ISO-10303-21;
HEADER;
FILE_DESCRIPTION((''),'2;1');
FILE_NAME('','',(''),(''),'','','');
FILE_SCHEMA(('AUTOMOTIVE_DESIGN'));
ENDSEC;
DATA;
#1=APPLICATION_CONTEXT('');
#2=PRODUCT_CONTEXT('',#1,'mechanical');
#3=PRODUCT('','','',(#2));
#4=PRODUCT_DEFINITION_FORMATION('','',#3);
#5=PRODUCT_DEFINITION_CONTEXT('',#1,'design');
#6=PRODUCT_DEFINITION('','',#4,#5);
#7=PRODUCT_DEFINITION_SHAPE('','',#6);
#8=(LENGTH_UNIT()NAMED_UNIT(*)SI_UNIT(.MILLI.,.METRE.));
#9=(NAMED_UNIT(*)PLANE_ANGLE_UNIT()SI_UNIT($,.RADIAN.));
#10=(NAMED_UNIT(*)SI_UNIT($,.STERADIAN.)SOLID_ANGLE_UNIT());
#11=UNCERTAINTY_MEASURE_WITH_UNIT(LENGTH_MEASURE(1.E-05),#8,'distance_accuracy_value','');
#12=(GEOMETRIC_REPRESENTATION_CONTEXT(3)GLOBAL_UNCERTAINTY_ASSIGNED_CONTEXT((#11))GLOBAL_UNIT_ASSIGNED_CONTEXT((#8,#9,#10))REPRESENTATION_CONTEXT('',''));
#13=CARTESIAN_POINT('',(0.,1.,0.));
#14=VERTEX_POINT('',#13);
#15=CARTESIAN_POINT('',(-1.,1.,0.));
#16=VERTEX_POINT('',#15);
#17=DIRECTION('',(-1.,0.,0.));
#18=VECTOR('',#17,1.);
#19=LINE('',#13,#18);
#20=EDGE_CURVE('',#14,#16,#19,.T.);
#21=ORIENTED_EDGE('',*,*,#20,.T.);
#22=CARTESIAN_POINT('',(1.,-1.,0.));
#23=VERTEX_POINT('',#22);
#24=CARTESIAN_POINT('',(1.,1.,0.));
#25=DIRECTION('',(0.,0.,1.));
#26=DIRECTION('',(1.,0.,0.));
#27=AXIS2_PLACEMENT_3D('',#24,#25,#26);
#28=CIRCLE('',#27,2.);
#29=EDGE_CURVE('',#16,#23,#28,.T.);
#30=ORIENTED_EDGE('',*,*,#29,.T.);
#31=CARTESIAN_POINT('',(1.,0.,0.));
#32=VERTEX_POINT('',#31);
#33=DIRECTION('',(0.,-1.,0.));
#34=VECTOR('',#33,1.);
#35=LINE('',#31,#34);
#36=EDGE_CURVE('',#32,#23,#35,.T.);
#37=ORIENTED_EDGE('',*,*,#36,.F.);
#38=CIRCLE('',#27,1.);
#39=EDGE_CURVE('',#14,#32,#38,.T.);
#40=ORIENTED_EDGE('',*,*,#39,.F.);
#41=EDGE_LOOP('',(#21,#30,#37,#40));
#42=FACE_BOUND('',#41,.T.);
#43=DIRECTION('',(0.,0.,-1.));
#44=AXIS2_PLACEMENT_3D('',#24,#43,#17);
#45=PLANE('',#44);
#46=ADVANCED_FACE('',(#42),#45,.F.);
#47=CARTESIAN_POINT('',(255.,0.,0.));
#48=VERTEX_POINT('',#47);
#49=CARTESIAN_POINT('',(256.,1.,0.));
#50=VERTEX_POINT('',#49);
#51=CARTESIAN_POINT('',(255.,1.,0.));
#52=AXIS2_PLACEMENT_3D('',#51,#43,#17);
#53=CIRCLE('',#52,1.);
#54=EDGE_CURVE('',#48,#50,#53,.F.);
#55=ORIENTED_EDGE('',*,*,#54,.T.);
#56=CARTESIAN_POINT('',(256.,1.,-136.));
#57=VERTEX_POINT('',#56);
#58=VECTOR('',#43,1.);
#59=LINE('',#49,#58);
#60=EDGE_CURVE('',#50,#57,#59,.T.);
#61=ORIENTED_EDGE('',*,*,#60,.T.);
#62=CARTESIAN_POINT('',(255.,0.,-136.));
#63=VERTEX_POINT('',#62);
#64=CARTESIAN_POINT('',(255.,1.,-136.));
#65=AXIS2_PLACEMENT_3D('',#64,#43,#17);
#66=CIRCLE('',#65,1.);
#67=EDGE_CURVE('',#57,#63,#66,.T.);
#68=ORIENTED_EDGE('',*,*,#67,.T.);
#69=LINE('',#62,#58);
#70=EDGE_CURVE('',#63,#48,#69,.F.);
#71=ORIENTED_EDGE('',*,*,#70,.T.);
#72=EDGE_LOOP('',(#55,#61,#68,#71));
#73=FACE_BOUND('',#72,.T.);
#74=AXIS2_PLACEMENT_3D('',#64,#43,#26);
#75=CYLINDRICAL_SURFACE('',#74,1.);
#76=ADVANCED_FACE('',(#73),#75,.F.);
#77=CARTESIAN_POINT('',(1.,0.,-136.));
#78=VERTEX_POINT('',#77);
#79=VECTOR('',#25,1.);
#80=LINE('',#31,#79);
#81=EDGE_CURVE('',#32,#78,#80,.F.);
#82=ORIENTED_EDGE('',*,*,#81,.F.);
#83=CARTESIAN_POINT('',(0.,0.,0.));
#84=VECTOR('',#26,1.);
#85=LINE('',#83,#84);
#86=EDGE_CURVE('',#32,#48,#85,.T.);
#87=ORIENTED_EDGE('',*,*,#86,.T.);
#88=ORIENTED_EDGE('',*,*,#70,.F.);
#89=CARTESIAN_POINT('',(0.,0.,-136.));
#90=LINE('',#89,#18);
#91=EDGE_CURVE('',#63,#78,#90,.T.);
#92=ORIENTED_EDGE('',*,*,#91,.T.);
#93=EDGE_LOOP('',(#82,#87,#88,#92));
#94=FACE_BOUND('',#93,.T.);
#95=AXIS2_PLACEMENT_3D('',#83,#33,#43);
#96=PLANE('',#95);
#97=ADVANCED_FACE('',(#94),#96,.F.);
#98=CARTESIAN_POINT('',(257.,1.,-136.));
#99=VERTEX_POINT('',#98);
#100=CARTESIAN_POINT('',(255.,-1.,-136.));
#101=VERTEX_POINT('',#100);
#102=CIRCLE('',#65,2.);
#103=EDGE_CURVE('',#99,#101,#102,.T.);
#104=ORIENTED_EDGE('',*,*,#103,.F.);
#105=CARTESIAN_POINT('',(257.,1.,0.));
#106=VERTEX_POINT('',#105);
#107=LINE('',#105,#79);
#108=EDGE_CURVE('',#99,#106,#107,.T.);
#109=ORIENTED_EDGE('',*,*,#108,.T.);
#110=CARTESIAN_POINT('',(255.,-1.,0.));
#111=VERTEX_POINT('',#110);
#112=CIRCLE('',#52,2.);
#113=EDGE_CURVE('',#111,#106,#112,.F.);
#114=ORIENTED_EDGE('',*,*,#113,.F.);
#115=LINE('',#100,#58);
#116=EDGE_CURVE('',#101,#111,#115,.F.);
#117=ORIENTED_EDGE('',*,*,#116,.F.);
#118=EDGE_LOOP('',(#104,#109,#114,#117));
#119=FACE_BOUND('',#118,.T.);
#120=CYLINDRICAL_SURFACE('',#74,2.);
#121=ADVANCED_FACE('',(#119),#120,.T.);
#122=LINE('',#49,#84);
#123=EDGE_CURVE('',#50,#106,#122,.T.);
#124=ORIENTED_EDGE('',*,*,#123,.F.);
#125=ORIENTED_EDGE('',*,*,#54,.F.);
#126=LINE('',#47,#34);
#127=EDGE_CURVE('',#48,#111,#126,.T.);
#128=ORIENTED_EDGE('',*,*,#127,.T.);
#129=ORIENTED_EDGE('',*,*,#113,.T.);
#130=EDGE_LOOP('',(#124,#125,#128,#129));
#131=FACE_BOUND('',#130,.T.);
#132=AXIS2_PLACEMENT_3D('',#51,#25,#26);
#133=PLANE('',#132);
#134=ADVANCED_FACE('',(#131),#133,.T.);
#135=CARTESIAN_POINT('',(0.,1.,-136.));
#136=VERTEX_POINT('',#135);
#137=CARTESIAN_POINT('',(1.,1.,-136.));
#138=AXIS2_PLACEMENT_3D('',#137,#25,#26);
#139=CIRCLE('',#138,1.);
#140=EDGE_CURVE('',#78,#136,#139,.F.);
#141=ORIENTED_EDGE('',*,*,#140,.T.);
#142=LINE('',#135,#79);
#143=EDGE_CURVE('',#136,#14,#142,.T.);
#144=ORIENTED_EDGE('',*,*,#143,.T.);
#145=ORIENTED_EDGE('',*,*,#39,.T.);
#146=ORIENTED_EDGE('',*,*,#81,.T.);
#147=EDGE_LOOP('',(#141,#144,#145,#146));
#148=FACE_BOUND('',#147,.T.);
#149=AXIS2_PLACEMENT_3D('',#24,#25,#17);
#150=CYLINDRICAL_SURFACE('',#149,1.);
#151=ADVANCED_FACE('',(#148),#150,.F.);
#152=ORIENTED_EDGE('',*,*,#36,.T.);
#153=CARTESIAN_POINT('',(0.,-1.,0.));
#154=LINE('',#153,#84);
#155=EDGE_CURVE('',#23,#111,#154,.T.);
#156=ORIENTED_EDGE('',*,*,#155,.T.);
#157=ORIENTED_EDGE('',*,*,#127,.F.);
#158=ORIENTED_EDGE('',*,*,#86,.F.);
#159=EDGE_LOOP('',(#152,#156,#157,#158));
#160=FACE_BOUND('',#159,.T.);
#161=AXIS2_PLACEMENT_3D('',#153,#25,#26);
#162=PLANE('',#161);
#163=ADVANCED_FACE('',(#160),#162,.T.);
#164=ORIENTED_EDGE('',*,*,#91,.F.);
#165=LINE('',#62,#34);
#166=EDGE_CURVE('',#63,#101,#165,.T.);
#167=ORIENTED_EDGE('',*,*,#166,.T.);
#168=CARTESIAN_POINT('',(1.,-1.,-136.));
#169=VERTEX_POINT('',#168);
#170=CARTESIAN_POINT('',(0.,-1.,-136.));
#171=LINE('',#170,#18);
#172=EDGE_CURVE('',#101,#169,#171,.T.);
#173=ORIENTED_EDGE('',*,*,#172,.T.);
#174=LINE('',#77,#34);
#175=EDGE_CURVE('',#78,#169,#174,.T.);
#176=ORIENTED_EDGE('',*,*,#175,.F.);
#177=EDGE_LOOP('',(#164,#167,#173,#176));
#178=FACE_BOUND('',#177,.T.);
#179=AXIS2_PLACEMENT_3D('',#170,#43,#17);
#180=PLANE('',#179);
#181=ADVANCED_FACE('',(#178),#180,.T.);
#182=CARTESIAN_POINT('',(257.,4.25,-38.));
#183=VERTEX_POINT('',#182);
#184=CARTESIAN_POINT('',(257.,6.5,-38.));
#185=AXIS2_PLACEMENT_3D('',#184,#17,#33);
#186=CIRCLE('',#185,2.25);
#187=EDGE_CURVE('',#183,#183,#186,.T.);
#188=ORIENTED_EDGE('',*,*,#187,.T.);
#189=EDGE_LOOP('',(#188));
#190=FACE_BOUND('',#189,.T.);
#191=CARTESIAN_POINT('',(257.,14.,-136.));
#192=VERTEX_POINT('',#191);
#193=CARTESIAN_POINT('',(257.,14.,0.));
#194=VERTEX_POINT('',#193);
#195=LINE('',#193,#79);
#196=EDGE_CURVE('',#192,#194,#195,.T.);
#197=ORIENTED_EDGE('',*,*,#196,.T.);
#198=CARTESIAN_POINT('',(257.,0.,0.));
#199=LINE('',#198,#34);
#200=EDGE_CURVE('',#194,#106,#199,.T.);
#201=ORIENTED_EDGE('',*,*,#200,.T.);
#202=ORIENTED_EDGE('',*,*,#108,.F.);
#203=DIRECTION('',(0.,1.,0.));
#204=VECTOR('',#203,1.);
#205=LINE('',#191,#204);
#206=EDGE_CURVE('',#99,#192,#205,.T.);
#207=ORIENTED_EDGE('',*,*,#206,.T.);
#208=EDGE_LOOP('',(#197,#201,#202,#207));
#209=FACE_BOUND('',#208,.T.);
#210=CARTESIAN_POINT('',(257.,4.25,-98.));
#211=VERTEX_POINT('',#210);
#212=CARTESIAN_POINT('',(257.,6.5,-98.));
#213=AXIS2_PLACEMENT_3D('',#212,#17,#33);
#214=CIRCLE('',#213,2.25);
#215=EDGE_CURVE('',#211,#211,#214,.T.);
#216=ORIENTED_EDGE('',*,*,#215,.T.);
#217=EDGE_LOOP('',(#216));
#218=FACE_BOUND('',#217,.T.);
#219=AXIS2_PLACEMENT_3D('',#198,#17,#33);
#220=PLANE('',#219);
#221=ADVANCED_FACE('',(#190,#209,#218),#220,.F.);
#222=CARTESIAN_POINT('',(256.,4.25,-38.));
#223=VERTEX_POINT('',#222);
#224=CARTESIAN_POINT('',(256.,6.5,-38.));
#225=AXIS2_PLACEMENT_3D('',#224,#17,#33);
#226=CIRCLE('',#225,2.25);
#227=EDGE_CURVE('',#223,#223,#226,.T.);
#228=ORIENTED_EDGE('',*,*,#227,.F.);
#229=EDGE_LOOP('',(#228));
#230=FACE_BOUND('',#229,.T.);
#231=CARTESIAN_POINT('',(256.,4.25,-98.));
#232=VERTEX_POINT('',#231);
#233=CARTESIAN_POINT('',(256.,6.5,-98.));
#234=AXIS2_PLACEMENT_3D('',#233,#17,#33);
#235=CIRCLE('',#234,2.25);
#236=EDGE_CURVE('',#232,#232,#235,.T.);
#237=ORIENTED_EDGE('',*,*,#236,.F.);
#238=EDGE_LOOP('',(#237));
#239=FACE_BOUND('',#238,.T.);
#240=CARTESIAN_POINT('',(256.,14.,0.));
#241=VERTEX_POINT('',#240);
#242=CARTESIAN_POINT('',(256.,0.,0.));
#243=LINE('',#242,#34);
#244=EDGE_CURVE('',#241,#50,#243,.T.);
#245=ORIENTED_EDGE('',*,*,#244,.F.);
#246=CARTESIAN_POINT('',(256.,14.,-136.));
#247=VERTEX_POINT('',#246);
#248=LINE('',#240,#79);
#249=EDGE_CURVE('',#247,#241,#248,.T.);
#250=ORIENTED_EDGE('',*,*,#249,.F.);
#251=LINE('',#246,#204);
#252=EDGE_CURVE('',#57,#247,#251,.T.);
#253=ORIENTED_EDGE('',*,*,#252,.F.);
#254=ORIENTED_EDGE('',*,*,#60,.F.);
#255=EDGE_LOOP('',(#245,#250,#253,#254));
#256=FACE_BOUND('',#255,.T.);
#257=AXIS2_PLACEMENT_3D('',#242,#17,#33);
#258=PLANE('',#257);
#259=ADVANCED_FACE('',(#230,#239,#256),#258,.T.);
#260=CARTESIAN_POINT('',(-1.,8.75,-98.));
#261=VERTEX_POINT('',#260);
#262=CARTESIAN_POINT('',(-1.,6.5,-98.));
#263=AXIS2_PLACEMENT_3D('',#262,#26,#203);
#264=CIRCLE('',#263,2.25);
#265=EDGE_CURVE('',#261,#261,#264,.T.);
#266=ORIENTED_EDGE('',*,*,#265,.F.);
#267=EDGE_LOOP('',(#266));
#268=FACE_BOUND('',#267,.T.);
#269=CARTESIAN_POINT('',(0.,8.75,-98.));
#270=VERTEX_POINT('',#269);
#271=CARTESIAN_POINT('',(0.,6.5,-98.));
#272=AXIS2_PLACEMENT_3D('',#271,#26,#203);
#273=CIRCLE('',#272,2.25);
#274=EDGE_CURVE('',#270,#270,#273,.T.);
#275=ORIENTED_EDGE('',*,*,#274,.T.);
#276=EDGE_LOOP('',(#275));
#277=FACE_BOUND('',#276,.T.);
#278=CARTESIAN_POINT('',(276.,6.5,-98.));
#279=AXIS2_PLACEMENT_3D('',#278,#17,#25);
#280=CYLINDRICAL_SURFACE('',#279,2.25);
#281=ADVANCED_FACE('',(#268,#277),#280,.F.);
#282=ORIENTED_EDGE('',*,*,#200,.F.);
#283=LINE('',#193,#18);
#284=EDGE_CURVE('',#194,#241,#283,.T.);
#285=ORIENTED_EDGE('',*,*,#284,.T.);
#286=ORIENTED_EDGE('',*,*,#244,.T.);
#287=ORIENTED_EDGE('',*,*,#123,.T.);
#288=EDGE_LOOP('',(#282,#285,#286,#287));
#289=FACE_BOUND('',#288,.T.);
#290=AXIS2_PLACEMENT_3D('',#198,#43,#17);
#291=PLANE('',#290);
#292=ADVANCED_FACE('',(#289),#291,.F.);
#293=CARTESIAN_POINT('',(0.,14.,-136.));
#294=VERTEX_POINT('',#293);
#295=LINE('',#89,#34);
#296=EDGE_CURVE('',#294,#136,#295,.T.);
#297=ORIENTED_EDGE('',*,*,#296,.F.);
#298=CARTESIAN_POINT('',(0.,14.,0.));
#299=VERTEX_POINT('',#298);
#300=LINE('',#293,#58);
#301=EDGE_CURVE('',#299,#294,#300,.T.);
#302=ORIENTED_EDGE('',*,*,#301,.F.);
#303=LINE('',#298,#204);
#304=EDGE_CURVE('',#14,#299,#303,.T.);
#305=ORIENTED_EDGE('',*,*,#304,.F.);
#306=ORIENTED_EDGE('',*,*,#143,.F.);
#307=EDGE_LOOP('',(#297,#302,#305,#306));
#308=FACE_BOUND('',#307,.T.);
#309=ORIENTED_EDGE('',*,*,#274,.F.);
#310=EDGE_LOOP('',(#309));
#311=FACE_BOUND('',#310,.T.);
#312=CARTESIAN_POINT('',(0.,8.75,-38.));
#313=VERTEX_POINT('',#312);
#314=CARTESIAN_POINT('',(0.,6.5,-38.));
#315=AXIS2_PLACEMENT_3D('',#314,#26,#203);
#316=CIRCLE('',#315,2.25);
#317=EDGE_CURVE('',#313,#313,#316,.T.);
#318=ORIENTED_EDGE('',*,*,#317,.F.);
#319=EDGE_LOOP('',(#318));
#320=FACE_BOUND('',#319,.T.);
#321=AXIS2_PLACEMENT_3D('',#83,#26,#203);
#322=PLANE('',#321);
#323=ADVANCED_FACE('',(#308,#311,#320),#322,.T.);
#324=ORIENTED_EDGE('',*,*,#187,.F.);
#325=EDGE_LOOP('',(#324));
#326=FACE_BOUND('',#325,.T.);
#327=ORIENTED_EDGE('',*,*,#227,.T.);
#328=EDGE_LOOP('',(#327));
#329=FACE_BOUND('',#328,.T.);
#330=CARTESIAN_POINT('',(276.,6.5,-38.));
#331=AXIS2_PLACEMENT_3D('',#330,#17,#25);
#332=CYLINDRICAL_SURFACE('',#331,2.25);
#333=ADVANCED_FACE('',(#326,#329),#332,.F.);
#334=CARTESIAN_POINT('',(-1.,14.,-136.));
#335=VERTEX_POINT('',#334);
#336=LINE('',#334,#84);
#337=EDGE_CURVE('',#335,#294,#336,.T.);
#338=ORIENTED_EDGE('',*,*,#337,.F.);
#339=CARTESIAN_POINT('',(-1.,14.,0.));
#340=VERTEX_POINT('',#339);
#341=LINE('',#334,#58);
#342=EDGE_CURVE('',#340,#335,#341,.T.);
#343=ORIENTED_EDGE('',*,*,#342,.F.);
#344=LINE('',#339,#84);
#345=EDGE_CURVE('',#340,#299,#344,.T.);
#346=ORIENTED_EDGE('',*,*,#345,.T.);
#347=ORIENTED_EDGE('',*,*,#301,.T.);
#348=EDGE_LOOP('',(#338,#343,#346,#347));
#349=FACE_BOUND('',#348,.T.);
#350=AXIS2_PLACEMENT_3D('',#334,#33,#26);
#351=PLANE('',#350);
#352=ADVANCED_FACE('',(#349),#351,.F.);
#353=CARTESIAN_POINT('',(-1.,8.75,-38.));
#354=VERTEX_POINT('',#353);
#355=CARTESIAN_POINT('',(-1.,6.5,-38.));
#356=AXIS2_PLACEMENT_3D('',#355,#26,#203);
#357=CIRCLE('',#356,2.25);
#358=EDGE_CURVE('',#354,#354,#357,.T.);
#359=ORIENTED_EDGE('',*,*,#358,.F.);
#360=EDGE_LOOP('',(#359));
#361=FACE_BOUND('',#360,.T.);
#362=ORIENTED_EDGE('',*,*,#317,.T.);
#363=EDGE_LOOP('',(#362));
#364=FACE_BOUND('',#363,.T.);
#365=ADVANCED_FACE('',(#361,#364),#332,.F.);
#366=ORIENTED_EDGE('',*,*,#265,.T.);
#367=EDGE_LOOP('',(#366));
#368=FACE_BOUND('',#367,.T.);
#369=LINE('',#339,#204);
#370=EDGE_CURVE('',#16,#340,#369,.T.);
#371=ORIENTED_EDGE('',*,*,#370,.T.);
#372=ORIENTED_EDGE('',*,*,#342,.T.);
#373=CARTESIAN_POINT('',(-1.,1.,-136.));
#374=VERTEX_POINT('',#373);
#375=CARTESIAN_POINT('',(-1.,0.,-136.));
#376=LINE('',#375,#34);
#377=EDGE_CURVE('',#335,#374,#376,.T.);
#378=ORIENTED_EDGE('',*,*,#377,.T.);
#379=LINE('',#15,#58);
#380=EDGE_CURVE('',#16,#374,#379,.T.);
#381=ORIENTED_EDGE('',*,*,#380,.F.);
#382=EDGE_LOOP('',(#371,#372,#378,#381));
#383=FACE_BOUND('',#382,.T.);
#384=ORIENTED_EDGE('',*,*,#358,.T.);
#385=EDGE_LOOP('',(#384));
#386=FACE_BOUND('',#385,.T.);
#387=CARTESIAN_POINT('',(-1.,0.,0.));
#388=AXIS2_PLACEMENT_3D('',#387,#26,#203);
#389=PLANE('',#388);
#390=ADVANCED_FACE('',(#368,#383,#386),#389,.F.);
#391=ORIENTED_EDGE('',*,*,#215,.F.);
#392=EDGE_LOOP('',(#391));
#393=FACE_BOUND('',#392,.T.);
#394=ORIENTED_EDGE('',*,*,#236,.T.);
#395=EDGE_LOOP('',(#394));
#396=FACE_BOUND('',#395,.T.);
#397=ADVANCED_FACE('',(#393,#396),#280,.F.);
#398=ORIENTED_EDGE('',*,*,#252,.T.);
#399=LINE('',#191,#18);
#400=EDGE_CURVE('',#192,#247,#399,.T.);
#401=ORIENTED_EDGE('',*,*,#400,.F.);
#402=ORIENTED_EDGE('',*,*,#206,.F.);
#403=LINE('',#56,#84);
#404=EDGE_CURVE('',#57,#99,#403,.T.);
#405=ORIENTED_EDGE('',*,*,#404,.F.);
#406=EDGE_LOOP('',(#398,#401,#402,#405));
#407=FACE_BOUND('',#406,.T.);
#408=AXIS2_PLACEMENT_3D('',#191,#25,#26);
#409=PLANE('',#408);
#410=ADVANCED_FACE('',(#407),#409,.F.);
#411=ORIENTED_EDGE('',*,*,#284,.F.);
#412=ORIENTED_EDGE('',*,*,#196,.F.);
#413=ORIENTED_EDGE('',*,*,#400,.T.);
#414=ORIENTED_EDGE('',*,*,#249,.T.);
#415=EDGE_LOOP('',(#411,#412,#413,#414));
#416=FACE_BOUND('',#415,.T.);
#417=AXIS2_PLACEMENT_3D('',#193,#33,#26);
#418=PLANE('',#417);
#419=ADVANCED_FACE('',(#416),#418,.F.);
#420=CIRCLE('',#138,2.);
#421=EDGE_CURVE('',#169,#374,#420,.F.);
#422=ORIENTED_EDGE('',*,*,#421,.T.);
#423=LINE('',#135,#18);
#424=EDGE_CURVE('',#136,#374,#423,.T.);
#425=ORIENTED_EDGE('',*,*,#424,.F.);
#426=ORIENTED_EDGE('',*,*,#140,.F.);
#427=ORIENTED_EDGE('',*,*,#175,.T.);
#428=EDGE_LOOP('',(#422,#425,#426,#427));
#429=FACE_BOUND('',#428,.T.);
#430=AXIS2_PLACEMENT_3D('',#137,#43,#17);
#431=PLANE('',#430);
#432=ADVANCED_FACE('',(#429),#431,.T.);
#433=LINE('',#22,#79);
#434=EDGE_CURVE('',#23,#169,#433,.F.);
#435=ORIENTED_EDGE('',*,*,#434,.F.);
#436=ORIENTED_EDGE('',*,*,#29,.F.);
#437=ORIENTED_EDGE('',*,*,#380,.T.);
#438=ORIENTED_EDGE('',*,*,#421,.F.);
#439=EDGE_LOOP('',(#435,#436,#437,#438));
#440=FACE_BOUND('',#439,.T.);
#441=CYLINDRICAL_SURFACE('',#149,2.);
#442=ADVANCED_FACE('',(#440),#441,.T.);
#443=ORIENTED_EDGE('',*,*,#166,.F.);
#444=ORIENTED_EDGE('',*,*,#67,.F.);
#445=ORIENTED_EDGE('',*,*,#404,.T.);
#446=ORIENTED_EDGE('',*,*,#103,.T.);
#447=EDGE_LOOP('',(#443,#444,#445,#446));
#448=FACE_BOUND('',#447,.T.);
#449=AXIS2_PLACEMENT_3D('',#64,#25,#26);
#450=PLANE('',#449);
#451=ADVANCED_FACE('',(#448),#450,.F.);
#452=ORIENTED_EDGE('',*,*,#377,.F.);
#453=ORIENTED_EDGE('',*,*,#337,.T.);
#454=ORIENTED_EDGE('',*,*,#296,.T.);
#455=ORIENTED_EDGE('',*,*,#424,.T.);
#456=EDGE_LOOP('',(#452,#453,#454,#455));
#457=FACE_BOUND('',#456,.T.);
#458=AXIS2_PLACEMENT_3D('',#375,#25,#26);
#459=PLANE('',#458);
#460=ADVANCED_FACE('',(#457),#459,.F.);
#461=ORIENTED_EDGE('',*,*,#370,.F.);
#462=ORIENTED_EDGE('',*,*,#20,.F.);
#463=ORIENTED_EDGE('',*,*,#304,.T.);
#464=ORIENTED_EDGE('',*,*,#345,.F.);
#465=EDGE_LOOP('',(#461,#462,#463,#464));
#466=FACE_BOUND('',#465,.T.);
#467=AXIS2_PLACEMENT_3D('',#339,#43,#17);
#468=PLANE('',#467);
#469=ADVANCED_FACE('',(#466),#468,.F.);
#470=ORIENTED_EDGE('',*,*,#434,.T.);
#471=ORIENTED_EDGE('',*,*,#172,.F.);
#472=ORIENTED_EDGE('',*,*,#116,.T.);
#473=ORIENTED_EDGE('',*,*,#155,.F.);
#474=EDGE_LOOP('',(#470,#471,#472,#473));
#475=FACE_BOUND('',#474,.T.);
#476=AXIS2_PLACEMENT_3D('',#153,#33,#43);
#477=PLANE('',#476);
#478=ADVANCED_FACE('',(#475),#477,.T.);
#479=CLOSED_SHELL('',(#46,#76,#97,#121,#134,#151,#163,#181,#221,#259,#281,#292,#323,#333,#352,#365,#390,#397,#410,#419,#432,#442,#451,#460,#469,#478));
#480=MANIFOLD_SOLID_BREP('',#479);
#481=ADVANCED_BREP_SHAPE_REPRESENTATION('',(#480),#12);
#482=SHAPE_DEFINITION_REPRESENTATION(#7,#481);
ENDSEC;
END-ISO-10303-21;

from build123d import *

# Parameters (mm, degrees)
SKETCH1_W                    = 256
SKETCH1_H                    = 136
BASE_FLANGE1_DEPTH           = 1
EDGE_FLANGE1_STRIP_W         = 6
EDGE_FLANGE1_STRIP_H         = 1
EDGE_FLANGE1_STRIP_CUT_DEPTH = 136
EDGE_FLANGE1_DEPTH           = 136
EDGE_FLANGE2_STRIP_W         = 6
EDGE_FLANGE2_STRIP_H         = 1
EDGE_FLANGE2_STRIP_CUT_DEPTH = 136
EDGE_FLANGE2_DEPTH           = 136
SKETCH12_R                   = 2.25
CUT_EXTRUDE1_DEPTH           = 278


# Sheet-metal steps are written as plain solids
with BuildPart() as part:
    # Sketch1 → Base-Flange1 (new body)
    with BuildSketch(Plane(origin=(0, 0, 0), x_dir=(1, 0, 0), z_dir=(0, 1, 0))):
        with Locations((128, 68)):
            Rectangle(SKETCH1_W, SKETCH1_H)
    extrude(amount=-BASE_FLANGE1_DEPTH)

    # Edge-Flange1 strip (across the edge) → Edge-Flange1 strip cut (cut)
    with BuildSketch(Plane.XY.offset(-136)):
        with Locations((-2, -0.5)):
            Rectangle(EDGE_FLANGE1_STRIP_W, EDGE_FLANGE1_STRIP_H)
    extrude(amount=EDGE_FLANGE1_STRIP_CUT_DEPTH, mode=Mode.SUBTRACT)

    # Edge-Flange1 section (across the edge) → Edge-Flange1 (add)
    with BuildSketch(Plane.XY.offset(-136)):
        with BuildLine():
            Line((-1, 1), (-1, 14))
            Line((-1, 14), (0, 14))
            Line((0, 14), (0, 1))
            ThreePointArc((0, 1), (0.292893219, 0.292893219), (1, 0))
            Line((1, 0), (1, -1))
            ThreePointArc((1, -1), (-0.414213562, -0.414213562), (-1, 1))
        make_face()
    extrude(amount=EDGE_FLANGE1_DEPTH)

    # Edge-Flange2 strip (across the edge) → Edge-Flange2 strip cut (cut)
    with BuildSketch(Plane(origin=(256, 0, 0), x_dir=(-1, 0, 0), z_dir=(0, 0, -1))):
        with Locations((-2, -0.5)):
            Rectangle(EDGE_FLANGE2_STRIP_W, EDGE_FLANGE2_STRIP_H)
    extrude(amount=EDGE_FLANGE2_STRIP_CUT_DEPTH, mode=Mode.SUBTRACT)

    # Edge-Flange2 section (across the edge) → Edge-Flange2 (add)
    with BuildSketch(Plane(origin=(256, 0, 0), x_dir=(-1, 0, 0), z_dir=(0, 0, -1))):
        with BuildLine():
            Line((-1, 1), (-1, 14))
            Line((-1, 14), (0, 14))
            Line((0, 14), (0, 1))
            ThreePointArc((0, 1), (0.292893219, 0.292893219), (1, 0))
            Line((1, 0), (1, -1))
            ThreePointArc((1, -1), (-0.414213562, -0.414213562), (-1, 1))
        make_face()
    extrude(amount=EDGE_FLANGE2_DEPTH)

    # Sketch12 → Cut-Extrude1 (cut)
    with BuildSketch(Plane(origin=(-2, -333.400026456, -193.062536038), x_dir=(0, 1, 0), z_dir=(-1, 0, 0))):
        with Locations(Location((339.900026456, -95.062536038, 0), (0, 0, 180))):
            Circle(SKETCH12_R)
        with Locations(Location((339.900026456, -155.062536038, 0), (0, 0, 180))):
            Circle(SKETCH12_R)
    extrude(amount=-CUT_EXTRUDE1_DEPTH, mode=Mode.SUBTRACT)


solid = part.part
